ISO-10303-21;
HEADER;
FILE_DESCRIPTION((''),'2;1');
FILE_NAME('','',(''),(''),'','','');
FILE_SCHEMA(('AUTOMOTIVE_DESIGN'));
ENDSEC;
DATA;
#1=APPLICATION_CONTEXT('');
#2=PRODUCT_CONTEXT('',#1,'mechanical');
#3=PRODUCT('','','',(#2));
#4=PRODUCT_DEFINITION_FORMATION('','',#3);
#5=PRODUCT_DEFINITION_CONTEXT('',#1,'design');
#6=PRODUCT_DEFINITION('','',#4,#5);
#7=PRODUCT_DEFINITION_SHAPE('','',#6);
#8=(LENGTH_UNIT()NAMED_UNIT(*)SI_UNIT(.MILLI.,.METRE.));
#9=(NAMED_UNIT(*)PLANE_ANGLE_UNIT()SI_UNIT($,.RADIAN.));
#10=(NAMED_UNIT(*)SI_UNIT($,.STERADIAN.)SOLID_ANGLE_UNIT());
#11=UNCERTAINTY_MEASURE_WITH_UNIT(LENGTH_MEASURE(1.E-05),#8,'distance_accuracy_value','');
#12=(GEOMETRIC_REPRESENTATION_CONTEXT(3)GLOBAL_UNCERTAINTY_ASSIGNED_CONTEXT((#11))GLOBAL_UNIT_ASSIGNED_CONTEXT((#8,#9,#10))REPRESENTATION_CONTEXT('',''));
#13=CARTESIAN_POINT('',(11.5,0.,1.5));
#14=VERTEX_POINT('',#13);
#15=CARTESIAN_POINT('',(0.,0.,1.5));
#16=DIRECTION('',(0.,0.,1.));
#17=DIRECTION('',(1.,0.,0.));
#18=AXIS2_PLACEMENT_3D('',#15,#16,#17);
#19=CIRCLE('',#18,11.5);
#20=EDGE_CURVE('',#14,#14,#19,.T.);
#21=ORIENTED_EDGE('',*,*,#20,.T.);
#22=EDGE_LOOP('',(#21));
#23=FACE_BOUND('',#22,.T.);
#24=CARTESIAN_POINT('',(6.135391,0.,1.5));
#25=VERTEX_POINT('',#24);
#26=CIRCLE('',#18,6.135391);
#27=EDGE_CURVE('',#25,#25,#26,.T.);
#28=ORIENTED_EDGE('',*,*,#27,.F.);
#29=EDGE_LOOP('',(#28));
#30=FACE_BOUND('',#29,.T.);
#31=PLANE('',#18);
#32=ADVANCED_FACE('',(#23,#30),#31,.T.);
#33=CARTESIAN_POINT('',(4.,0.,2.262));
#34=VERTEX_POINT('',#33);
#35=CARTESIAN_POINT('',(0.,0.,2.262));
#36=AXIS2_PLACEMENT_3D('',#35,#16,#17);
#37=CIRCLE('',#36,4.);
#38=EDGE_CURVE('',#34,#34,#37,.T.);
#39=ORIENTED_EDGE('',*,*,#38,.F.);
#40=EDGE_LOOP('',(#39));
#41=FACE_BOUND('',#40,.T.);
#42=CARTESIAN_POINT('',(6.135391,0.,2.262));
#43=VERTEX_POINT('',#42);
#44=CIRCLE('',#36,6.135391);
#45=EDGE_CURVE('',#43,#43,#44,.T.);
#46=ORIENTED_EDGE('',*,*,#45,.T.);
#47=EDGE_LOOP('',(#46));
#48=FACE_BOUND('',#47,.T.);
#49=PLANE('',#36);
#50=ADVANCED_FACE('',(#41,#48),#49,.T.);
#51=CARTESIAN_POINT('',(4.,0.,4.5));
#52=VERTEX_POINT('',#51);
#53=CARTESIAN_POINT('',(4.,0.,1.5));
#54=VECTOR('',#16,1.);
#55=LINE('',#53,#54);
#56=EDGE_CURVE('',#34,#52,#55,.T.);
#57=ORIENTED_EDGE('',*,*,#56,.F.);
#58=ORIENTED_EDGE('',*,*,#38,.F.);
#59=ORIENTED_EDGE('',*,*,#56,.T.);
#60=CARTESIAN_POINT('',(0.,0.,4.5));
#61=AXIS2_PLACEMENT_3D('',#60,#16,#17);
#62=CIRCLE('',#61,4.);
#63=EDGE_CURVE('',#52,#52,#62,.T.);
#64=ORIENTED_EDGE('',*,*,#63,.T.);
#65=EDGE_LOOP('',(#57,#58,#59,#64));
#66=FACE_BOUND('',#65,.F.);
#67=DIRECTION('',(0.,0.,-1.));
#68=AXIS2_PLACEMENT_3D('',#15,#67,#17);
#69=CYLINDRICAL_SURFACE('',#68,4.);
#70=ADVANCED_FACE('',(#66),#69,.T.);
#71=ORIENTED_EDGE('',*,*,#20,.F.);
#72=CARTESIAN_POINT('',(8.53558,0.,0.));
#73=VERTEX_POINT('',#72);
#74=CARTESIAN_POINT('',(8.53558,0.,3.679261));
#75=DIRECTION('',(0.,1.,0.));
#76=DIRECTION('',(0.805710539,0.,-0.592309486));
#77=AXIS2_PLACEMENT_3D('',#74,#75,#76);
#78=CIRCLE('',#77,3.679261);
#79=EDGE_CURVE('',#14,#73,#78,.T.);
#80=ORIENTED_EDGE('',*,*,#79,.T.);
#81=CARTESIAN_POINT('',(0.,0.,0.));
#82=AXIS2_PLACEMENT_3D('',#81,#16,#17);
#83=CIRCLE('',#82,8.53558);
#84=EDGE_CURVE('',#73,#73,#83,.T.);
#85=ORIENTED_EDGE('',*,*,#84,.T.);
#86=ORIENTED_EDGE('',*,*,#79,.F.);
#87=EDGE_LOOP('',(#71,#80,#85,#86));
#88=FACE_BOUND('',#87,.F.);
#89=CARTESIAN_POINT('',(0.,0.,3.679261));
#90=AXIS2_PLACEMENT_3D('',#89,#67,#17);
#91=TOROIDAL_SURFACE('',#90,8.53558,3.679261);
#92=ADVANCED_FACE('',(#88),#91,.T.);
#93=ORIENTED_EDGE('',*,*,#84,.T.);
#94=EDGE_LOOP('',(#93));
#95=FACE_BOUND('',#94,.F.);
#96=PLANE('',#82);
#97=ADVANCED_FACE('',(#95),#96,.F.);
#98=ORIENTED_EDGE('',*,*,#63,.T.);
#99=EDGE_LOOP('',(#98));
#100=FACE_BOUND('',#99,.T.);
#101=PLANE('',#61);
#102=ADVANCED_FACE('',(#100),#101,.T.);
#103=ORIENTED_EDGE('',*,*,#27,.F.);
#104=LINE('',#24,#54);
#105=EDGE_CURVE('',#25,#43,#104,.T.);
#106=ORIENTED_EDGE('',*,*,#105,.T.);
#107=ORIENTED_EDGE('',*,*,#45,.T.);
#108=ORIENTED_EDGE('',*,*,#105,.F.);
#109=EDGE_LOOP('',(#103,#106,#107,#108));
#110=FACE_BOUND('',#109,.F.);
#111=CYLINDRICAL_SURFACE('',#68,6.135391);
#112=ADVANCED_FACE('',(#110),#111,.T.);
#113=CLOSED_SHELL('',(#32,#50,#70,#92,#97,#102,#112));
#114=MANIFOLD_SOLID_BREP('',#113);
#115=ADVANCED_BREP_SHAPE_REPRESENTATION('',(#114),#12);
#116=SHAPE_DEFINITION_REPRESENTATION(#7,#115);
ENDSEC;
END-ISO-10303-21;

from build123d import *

# Parameters (mm, degrees)
F0_R     = 11.5
F1_DEPTH = 1.5
F3_R     = 6.1353913868
F3_R_2   = 4
F4_DEPTH = 0.762
F2_R     = 4
F5_DEPTH = 3


# Not quite as in the source:
# - a fillet or chamfer that OpenCascade refuses, or shapes differently, is made with other operations: its cross-section is extruded or revolved along the edge and cut away or added


with BuildPart() as f1:
    # F0 (on Top) → F1 (new body)
    with BuildSketch(Plane.XY):
        Circle(F0_R)
    extrude(amount=F1_DEPTH)

    # F3 (on face) → F4 (join)
    with BuildSketch(Plane.XY.offset(1.5)):
        Circle(F3_R)
        Circle(F3_R_2, mode=Mode.SUBTRACT)
    extrude(amount=F4_DEPTH)

    # F2 (on face) → F5 (join)
    with BuildSketch(Plane.XY.offset(1.5)):
        Circle(F2_R)
    extrude(amount=F5_DEPTH)

    # F6: fillet of radius 3.6792614691 on 1 edges, made by hand

    # F6_s1 → F6_t2 (revolve, cut)
    with BuildSketch(Plane.XZ):
        with BuildLine():
            ThreePointArc((11.5, 1.5), (10.1967383184, 0.396348303), (8.5355802579, 0))
            Line((8.5355802579, 0), (11.5, 0))
            Line((11.5, 0), (11.5, 1.5))
        make_face()
    revolve(axis=Axis((0, 0, 0), (0, 0, 1)), mode=Mode.SUBTRACT)


solid = f1.part
